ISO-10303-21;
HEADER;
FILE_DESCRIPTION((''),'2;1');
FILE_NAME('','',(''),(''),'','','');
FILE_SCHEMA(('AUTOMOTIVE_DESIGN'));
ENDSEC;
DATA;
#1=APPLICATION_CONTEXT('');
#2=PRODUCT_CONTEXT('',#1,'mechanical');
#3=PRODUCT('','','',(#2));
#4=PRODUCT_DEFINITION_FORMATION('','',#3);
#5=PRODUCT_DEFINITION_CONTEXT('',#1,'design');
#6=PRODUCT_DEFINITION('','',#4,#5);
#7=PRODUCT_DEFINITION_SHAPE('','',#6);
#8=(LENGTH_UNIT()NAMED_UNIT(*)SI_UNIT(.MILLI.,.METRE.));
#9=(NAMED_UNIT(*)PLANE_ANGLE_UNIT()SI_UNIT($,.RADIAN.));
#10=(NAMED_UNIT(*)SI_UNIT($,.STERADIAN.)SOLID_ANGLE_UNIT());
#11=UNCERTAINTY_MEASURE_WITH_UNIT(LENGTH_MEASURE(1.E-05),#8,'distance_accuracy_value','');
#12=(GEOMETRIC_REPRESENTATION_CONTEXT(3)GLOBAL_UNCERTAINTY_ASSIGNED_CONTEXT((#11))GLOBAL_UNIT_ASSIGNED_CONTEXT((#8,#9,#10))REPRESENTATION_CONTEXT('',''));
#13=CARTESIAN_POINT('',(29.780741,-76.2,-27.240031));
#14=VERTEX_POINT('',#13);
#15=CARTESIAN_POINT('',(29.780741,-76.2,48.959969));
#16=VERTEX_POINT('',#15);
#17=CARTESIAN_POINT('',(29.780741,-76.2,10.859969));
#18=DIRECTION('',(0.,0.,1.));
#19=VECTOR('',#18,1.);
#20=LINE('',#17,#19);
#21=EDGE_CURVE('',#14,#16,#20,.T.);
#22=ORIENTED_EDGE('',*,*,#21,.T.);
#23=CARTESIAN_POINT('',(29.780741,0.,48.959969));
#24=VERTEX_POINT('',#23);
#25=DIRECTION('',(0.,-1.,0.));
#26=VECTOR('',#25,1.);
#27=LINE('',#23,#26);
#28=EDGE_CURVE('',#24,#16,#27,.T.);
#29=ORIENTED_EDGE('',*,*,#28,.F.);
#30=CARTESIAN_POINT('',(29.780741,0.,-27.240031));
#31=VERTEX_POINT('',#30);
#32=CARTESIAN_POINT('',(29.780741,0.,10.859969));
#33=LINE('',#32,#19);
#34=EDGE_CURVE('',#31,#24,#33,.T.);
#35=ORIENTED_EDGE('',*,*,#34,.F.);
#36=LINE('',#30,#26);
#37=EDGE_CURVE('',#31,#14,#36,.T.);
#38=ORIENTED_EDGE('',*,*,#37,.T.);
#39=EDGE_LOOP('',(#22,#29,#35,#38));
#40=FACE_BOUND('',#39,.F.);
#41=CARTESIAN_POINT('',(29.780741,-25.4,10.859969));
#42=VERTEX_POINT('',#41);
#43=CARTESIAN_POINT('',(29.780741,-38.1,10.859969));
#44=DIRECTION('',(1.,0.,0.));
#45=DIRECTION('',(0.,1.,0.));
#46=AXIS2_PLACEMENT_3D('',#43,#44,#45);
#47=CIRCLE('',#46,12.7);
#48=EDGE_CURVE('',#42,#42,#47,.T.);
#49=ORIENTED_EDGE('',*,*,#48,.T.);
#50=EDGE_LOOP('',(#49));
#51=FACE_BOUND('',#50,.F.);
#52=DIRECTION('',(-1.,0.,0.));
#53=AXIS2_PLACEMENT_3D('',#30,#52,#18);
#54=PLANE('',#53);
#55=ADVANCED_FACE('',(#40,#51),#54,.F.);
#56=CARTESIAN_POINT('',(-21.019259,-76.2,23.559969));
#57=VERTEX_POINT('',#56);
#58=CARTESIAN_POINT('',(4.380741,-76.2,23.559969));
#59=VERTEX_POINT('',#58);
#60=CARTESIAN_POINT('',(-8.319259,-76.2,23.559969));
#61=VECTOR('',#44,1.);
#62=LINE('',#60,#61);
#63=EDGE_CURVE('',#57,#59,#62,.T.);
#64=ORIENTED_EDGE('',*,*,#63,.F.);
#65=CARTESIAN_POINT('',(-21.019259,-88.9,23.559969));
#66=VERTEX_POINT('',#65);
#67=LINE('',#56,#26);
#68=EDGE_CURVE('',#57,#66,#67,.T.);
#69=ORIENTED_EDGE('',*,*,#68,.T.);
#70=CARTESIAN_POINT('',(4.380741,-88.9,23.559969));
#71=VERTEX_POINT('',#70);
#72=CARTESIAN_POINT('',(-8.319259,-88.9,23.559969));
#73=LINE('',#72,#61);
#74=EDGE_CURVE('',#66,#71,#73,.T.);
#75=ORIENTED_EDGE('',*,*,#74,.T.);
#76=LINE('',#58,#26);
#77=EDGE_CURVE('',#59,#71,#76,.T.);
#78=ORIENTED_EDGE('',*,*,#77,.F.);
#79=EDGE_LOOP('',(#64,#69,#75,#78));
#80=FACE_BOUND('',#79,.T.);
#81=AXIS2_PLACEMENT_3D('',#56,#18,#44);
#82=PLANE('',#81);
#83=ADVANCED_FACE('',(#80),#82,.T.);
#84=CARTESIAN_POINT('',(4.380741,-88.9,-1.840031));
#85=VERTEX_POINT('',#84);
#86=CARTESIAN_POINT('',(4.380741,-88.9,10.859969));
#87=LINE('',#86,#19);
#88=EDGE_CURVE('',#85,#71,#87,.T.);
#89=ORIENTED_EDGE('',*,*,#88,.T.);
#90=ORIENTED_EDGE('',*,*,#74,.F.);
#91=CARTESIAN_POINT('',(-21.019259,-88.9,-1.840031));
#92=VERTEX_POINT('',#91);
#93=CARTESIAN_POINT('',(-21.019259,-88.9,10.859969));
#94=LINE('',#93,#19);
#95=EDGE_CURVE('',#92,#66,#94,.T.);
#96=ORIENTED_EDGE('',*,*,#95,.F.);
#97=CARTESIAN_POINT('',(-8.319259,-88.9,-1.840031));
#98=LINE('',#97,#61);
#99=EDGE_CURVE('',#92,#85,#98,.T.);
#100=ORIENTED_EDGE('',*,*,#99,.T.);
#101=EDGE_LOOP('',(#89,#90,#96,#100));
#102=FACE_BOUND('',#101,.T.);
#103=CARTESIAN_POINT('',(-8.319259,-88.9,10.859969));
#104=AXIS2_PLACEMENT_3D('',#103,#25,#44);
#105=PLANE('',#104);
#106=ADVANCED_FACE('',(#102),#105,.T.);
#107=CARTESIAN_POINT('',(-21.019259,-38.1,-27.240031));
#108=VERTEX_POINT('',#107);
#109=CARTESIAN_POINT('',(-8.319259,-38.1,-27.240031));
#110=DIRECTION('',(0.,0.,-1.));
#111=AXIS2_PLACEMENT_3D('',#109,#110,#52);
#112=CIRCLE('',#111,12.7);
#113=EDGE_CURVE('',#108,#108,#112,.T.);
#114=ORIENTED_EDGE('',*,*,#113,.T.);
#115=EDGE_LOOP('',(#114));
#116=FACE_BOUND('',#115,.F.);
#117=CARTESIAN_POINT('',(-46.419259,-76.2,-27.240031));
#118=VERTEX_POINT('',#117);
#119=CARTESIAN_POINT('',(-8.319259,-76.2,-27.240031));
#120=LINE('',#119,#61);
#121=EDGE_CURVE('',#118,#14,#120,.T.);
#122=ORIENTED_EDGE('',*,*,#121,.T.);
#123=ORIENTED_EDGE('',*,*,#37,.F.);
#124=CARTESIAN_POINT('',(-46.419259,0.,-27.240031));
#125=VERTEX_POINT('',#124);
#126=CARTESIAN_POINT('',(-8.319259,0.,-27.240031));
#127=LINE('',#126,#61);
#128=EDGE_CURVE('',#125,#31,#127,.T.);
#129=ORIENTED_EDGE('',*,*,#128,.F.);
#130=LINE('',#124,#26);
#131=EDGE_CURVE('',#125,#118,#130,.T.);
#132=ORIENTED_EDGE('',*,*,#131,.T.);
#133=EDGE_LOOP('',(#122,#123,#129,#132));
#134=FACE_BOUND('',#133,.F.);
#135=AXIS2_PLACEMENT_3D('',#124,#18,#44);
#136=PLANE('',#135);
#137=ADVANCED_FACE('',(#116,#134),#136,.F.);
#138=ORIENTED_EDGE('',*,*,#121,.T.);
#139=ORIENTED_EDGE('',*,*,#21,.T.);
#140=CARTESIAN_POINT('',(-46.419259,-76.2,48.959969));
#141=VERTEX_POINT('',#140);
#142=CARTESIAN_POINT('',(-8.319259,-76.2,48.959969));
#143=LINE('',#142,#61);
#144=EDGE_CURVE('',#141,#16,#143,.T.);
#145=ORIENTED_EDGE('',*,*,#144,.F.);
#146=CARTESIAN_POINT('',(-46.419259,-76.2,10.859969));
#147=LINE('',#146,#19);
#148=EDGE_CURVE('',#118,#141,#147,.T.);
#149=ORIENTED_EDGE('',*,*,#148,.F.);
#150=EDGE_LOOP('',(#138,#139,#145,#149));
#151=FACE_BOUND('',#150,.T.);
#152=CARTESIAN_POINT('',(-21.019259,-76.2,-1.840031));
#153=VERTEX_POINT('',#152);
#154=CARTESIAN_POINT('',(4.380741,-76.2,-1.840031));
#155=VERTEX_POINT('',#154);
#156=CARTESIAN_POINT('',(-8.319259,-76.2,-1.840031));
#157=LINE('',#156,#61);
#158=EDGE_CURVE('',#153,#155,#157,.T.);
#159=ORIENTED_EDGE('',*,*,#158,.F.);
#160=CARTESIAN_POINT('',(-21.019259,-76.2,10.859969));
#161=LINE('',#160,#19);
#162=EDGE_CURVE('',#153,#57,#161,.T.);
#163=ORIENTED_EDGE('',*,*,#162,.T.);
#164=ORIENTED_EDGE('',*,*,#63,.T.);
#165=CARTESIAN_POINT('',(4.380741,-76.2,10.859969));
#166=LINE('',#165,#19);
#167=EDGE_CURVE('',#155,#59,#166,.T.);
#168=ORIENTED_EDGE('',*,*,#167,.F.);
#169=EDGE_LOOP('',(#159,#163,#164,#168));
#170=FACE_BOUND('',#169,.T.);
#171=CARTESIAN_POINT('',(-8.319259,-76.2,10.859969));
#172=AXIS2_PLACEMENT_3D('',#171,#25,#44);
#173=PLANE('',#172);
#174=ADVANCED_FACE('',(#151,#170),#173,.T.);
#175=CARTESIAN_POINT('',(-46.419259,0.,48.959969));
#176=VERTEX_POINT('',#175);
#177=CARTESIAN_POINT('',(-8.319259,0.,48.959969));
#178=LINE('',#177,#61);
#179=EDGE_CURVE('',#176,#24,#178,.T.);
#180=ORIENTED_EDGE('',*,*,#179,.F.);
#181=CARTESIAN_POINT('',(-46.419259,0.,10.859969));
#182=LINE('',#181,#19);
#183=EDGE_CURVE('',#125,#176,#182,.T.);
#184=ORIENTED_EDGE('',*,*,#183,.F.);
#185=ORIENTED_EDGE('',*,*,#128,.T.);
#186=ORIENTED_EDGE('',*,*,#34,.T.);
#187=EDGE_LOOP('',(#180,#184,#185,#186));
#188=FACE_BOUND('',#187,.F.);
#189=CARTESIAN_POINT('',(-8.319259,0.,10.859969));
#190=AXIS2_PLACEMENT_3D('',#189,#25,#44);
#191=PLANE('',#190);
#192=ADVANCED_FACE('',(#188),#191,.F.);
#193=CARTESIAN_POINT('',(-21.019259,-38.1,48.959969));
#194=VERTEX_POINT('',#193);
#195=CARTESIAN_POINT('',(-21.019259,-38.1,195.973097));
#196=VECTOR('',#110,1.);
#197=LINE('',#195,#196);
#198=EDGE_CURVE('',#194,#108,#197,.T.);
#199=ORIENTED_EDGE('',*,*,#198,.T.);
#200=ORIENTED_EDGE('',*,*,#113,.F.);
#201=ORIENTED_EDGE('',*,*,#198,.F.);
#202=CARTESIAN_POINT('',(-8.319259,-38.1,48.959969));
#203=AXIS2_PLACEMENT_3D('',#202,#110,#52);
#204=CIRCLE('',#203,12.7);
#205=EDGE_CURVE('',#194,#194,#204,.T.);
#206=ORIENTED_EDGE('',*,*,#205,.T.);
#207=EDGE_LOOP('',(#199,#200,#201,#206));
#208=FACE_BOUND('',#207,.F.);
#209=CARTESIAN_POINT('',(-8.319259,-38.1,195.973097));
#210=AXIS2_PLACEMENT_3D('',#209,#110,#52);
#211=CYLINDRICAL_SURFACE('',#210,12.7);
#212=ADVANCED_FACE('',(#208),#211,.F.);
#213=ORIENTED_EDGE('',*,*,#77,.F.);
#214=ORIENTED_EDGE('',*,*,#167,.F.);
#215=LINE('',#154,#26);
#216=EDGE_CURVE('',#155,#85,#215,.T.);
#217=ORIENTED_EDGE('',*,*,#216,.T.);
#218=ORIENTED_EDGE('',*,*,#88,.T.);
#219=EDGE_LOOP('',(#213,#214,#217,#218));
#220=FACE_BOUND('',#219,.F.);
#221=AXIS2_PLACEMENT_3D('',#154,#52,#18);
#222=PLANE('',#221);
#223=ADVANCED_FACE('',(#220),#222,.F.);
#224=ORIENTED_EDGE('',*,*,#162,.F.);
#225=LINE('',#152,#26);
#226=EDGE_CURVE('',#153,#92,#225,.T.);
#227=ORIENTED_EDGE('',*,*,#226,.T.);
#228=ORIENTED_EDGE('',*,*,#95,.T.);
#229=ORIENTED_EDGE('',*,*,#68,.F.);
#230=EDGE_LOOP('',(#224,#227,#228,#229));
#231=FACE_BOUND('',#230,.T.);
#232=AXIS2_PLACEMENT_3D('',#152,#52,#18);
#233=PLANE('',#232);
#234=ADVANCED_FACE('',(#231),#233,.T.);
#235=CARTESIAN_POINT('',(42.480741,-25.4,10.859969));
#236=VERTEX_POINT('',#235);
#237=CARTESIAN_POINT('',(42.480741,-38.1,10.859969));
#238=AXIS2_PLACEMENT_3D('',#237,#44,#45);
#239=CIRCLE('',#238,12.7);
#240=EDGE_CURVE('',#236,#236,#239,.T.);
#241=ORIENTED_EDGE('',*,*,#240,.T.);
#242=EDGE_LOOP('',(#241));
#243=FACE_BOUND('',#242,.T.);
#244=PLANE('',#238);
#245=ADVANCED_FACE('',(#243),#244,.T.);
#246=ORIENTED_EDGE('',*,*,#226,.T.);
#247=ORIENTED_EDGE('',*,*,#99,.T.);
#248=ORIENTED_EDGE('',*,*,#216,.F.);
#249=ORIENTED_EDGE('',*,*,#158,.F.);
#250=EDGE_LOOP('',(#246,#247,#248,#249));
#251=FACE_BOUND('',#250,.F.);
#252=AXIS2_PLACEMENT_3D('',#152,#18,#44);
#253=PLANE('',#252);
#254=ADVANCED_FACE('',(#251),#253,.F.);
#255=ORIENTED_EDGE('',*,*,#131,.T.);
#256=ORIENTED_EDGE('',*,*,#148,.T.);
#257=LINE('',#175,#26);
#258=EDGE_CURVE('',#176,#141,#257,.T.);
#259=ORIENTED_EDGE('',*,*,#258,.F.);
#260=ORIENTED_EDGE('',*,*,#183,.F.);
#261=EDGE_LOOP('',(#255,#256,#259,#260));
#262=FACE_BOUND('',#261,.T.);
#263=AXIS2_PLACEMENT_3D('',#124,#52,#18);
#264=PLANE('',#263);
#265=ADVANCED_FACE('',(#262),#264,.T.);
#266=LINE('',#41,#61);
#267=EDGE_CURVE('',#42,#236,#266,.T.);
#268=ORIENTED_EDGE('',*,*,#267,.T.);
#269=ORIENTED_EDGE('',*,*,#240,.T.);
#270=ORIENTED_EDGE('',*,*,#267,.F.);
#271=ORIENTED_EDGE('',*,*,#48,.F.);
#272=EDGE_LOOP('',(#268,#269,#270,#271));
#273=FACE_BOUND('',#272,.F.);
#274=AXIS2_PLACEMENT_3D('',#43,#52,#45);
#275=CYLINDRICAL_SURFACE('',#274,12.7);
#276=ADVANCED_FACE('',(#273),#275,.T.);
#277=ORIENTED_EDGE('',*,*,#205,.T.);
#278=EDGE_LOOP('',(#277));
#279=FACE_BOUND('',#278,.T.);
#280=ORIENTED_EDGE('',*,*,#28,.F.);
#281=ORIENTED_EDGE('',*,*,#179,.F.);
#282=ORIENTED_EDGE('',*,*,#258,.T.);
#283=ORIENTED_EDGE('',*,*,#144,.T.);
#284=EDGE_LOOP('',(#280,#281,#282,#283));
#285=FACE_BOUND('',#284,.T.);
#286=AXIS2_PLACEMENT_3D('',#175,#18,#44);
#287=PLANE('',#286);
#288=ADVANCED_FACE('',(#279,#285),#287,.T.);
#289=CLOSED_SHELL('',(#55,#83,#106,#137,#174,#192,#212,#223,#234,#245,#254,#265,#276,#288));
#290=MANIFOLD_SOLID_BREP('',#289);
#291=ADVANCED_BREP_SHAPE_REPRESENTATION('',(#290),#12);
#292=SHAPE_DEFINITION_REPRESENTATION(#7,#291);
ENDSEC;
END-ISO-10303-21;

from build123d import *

# Parameters (mm, degrees)
F0_W     = 76.2
F0_H     = 76.2
F1_DEPTH = 76.2
F2_W     = 25.4
F2_H     = 25.4
F3_DEPTH = 12.7
F4_R     = 12.7
F5_DEPTH = 12.7
F7_D     = 25.4


# Not quite as in the source:
# - a length typed as a fraction of an inch, garbled in the dataset ("3 / 203.2 mm" for 3/8 in), is restored


with BuildPart() as f1:
    # F0 (on Front) → F1 (new body)
    with BuildSketch(Plane.XZ):
        with Locations((-8.3192586899, 10.8599686285)):
            Rectangle(F0_W, F0_H)
    extrude(amount=F1_DEPTH)

    # F2 (on face) → F3 (join)
    with BuildSketch(Plane.XZ.offset(76.2)):
        with Locations((-8.3192586899, 10.8599686285)):
            Rectangle(F2_W, F2_H)
    extrude(amount=F3_DEPTH)

    # F4 (on face) → F5 (join)
    with BuildSketch(Plane.YZ.offset(29.7807413101)):
        with Locations((-38.1, 10.8599686285)):
            Circle(F4_R)
    extrude(amount=F5_DEPTH)

    # F7 (through all)
    with Locations(Plane.XY.offset(48.9599686285)):
        with Locations((-8.3192586899, -38.1)):
            Hole(F7_D / 2)


solid = f1.part
